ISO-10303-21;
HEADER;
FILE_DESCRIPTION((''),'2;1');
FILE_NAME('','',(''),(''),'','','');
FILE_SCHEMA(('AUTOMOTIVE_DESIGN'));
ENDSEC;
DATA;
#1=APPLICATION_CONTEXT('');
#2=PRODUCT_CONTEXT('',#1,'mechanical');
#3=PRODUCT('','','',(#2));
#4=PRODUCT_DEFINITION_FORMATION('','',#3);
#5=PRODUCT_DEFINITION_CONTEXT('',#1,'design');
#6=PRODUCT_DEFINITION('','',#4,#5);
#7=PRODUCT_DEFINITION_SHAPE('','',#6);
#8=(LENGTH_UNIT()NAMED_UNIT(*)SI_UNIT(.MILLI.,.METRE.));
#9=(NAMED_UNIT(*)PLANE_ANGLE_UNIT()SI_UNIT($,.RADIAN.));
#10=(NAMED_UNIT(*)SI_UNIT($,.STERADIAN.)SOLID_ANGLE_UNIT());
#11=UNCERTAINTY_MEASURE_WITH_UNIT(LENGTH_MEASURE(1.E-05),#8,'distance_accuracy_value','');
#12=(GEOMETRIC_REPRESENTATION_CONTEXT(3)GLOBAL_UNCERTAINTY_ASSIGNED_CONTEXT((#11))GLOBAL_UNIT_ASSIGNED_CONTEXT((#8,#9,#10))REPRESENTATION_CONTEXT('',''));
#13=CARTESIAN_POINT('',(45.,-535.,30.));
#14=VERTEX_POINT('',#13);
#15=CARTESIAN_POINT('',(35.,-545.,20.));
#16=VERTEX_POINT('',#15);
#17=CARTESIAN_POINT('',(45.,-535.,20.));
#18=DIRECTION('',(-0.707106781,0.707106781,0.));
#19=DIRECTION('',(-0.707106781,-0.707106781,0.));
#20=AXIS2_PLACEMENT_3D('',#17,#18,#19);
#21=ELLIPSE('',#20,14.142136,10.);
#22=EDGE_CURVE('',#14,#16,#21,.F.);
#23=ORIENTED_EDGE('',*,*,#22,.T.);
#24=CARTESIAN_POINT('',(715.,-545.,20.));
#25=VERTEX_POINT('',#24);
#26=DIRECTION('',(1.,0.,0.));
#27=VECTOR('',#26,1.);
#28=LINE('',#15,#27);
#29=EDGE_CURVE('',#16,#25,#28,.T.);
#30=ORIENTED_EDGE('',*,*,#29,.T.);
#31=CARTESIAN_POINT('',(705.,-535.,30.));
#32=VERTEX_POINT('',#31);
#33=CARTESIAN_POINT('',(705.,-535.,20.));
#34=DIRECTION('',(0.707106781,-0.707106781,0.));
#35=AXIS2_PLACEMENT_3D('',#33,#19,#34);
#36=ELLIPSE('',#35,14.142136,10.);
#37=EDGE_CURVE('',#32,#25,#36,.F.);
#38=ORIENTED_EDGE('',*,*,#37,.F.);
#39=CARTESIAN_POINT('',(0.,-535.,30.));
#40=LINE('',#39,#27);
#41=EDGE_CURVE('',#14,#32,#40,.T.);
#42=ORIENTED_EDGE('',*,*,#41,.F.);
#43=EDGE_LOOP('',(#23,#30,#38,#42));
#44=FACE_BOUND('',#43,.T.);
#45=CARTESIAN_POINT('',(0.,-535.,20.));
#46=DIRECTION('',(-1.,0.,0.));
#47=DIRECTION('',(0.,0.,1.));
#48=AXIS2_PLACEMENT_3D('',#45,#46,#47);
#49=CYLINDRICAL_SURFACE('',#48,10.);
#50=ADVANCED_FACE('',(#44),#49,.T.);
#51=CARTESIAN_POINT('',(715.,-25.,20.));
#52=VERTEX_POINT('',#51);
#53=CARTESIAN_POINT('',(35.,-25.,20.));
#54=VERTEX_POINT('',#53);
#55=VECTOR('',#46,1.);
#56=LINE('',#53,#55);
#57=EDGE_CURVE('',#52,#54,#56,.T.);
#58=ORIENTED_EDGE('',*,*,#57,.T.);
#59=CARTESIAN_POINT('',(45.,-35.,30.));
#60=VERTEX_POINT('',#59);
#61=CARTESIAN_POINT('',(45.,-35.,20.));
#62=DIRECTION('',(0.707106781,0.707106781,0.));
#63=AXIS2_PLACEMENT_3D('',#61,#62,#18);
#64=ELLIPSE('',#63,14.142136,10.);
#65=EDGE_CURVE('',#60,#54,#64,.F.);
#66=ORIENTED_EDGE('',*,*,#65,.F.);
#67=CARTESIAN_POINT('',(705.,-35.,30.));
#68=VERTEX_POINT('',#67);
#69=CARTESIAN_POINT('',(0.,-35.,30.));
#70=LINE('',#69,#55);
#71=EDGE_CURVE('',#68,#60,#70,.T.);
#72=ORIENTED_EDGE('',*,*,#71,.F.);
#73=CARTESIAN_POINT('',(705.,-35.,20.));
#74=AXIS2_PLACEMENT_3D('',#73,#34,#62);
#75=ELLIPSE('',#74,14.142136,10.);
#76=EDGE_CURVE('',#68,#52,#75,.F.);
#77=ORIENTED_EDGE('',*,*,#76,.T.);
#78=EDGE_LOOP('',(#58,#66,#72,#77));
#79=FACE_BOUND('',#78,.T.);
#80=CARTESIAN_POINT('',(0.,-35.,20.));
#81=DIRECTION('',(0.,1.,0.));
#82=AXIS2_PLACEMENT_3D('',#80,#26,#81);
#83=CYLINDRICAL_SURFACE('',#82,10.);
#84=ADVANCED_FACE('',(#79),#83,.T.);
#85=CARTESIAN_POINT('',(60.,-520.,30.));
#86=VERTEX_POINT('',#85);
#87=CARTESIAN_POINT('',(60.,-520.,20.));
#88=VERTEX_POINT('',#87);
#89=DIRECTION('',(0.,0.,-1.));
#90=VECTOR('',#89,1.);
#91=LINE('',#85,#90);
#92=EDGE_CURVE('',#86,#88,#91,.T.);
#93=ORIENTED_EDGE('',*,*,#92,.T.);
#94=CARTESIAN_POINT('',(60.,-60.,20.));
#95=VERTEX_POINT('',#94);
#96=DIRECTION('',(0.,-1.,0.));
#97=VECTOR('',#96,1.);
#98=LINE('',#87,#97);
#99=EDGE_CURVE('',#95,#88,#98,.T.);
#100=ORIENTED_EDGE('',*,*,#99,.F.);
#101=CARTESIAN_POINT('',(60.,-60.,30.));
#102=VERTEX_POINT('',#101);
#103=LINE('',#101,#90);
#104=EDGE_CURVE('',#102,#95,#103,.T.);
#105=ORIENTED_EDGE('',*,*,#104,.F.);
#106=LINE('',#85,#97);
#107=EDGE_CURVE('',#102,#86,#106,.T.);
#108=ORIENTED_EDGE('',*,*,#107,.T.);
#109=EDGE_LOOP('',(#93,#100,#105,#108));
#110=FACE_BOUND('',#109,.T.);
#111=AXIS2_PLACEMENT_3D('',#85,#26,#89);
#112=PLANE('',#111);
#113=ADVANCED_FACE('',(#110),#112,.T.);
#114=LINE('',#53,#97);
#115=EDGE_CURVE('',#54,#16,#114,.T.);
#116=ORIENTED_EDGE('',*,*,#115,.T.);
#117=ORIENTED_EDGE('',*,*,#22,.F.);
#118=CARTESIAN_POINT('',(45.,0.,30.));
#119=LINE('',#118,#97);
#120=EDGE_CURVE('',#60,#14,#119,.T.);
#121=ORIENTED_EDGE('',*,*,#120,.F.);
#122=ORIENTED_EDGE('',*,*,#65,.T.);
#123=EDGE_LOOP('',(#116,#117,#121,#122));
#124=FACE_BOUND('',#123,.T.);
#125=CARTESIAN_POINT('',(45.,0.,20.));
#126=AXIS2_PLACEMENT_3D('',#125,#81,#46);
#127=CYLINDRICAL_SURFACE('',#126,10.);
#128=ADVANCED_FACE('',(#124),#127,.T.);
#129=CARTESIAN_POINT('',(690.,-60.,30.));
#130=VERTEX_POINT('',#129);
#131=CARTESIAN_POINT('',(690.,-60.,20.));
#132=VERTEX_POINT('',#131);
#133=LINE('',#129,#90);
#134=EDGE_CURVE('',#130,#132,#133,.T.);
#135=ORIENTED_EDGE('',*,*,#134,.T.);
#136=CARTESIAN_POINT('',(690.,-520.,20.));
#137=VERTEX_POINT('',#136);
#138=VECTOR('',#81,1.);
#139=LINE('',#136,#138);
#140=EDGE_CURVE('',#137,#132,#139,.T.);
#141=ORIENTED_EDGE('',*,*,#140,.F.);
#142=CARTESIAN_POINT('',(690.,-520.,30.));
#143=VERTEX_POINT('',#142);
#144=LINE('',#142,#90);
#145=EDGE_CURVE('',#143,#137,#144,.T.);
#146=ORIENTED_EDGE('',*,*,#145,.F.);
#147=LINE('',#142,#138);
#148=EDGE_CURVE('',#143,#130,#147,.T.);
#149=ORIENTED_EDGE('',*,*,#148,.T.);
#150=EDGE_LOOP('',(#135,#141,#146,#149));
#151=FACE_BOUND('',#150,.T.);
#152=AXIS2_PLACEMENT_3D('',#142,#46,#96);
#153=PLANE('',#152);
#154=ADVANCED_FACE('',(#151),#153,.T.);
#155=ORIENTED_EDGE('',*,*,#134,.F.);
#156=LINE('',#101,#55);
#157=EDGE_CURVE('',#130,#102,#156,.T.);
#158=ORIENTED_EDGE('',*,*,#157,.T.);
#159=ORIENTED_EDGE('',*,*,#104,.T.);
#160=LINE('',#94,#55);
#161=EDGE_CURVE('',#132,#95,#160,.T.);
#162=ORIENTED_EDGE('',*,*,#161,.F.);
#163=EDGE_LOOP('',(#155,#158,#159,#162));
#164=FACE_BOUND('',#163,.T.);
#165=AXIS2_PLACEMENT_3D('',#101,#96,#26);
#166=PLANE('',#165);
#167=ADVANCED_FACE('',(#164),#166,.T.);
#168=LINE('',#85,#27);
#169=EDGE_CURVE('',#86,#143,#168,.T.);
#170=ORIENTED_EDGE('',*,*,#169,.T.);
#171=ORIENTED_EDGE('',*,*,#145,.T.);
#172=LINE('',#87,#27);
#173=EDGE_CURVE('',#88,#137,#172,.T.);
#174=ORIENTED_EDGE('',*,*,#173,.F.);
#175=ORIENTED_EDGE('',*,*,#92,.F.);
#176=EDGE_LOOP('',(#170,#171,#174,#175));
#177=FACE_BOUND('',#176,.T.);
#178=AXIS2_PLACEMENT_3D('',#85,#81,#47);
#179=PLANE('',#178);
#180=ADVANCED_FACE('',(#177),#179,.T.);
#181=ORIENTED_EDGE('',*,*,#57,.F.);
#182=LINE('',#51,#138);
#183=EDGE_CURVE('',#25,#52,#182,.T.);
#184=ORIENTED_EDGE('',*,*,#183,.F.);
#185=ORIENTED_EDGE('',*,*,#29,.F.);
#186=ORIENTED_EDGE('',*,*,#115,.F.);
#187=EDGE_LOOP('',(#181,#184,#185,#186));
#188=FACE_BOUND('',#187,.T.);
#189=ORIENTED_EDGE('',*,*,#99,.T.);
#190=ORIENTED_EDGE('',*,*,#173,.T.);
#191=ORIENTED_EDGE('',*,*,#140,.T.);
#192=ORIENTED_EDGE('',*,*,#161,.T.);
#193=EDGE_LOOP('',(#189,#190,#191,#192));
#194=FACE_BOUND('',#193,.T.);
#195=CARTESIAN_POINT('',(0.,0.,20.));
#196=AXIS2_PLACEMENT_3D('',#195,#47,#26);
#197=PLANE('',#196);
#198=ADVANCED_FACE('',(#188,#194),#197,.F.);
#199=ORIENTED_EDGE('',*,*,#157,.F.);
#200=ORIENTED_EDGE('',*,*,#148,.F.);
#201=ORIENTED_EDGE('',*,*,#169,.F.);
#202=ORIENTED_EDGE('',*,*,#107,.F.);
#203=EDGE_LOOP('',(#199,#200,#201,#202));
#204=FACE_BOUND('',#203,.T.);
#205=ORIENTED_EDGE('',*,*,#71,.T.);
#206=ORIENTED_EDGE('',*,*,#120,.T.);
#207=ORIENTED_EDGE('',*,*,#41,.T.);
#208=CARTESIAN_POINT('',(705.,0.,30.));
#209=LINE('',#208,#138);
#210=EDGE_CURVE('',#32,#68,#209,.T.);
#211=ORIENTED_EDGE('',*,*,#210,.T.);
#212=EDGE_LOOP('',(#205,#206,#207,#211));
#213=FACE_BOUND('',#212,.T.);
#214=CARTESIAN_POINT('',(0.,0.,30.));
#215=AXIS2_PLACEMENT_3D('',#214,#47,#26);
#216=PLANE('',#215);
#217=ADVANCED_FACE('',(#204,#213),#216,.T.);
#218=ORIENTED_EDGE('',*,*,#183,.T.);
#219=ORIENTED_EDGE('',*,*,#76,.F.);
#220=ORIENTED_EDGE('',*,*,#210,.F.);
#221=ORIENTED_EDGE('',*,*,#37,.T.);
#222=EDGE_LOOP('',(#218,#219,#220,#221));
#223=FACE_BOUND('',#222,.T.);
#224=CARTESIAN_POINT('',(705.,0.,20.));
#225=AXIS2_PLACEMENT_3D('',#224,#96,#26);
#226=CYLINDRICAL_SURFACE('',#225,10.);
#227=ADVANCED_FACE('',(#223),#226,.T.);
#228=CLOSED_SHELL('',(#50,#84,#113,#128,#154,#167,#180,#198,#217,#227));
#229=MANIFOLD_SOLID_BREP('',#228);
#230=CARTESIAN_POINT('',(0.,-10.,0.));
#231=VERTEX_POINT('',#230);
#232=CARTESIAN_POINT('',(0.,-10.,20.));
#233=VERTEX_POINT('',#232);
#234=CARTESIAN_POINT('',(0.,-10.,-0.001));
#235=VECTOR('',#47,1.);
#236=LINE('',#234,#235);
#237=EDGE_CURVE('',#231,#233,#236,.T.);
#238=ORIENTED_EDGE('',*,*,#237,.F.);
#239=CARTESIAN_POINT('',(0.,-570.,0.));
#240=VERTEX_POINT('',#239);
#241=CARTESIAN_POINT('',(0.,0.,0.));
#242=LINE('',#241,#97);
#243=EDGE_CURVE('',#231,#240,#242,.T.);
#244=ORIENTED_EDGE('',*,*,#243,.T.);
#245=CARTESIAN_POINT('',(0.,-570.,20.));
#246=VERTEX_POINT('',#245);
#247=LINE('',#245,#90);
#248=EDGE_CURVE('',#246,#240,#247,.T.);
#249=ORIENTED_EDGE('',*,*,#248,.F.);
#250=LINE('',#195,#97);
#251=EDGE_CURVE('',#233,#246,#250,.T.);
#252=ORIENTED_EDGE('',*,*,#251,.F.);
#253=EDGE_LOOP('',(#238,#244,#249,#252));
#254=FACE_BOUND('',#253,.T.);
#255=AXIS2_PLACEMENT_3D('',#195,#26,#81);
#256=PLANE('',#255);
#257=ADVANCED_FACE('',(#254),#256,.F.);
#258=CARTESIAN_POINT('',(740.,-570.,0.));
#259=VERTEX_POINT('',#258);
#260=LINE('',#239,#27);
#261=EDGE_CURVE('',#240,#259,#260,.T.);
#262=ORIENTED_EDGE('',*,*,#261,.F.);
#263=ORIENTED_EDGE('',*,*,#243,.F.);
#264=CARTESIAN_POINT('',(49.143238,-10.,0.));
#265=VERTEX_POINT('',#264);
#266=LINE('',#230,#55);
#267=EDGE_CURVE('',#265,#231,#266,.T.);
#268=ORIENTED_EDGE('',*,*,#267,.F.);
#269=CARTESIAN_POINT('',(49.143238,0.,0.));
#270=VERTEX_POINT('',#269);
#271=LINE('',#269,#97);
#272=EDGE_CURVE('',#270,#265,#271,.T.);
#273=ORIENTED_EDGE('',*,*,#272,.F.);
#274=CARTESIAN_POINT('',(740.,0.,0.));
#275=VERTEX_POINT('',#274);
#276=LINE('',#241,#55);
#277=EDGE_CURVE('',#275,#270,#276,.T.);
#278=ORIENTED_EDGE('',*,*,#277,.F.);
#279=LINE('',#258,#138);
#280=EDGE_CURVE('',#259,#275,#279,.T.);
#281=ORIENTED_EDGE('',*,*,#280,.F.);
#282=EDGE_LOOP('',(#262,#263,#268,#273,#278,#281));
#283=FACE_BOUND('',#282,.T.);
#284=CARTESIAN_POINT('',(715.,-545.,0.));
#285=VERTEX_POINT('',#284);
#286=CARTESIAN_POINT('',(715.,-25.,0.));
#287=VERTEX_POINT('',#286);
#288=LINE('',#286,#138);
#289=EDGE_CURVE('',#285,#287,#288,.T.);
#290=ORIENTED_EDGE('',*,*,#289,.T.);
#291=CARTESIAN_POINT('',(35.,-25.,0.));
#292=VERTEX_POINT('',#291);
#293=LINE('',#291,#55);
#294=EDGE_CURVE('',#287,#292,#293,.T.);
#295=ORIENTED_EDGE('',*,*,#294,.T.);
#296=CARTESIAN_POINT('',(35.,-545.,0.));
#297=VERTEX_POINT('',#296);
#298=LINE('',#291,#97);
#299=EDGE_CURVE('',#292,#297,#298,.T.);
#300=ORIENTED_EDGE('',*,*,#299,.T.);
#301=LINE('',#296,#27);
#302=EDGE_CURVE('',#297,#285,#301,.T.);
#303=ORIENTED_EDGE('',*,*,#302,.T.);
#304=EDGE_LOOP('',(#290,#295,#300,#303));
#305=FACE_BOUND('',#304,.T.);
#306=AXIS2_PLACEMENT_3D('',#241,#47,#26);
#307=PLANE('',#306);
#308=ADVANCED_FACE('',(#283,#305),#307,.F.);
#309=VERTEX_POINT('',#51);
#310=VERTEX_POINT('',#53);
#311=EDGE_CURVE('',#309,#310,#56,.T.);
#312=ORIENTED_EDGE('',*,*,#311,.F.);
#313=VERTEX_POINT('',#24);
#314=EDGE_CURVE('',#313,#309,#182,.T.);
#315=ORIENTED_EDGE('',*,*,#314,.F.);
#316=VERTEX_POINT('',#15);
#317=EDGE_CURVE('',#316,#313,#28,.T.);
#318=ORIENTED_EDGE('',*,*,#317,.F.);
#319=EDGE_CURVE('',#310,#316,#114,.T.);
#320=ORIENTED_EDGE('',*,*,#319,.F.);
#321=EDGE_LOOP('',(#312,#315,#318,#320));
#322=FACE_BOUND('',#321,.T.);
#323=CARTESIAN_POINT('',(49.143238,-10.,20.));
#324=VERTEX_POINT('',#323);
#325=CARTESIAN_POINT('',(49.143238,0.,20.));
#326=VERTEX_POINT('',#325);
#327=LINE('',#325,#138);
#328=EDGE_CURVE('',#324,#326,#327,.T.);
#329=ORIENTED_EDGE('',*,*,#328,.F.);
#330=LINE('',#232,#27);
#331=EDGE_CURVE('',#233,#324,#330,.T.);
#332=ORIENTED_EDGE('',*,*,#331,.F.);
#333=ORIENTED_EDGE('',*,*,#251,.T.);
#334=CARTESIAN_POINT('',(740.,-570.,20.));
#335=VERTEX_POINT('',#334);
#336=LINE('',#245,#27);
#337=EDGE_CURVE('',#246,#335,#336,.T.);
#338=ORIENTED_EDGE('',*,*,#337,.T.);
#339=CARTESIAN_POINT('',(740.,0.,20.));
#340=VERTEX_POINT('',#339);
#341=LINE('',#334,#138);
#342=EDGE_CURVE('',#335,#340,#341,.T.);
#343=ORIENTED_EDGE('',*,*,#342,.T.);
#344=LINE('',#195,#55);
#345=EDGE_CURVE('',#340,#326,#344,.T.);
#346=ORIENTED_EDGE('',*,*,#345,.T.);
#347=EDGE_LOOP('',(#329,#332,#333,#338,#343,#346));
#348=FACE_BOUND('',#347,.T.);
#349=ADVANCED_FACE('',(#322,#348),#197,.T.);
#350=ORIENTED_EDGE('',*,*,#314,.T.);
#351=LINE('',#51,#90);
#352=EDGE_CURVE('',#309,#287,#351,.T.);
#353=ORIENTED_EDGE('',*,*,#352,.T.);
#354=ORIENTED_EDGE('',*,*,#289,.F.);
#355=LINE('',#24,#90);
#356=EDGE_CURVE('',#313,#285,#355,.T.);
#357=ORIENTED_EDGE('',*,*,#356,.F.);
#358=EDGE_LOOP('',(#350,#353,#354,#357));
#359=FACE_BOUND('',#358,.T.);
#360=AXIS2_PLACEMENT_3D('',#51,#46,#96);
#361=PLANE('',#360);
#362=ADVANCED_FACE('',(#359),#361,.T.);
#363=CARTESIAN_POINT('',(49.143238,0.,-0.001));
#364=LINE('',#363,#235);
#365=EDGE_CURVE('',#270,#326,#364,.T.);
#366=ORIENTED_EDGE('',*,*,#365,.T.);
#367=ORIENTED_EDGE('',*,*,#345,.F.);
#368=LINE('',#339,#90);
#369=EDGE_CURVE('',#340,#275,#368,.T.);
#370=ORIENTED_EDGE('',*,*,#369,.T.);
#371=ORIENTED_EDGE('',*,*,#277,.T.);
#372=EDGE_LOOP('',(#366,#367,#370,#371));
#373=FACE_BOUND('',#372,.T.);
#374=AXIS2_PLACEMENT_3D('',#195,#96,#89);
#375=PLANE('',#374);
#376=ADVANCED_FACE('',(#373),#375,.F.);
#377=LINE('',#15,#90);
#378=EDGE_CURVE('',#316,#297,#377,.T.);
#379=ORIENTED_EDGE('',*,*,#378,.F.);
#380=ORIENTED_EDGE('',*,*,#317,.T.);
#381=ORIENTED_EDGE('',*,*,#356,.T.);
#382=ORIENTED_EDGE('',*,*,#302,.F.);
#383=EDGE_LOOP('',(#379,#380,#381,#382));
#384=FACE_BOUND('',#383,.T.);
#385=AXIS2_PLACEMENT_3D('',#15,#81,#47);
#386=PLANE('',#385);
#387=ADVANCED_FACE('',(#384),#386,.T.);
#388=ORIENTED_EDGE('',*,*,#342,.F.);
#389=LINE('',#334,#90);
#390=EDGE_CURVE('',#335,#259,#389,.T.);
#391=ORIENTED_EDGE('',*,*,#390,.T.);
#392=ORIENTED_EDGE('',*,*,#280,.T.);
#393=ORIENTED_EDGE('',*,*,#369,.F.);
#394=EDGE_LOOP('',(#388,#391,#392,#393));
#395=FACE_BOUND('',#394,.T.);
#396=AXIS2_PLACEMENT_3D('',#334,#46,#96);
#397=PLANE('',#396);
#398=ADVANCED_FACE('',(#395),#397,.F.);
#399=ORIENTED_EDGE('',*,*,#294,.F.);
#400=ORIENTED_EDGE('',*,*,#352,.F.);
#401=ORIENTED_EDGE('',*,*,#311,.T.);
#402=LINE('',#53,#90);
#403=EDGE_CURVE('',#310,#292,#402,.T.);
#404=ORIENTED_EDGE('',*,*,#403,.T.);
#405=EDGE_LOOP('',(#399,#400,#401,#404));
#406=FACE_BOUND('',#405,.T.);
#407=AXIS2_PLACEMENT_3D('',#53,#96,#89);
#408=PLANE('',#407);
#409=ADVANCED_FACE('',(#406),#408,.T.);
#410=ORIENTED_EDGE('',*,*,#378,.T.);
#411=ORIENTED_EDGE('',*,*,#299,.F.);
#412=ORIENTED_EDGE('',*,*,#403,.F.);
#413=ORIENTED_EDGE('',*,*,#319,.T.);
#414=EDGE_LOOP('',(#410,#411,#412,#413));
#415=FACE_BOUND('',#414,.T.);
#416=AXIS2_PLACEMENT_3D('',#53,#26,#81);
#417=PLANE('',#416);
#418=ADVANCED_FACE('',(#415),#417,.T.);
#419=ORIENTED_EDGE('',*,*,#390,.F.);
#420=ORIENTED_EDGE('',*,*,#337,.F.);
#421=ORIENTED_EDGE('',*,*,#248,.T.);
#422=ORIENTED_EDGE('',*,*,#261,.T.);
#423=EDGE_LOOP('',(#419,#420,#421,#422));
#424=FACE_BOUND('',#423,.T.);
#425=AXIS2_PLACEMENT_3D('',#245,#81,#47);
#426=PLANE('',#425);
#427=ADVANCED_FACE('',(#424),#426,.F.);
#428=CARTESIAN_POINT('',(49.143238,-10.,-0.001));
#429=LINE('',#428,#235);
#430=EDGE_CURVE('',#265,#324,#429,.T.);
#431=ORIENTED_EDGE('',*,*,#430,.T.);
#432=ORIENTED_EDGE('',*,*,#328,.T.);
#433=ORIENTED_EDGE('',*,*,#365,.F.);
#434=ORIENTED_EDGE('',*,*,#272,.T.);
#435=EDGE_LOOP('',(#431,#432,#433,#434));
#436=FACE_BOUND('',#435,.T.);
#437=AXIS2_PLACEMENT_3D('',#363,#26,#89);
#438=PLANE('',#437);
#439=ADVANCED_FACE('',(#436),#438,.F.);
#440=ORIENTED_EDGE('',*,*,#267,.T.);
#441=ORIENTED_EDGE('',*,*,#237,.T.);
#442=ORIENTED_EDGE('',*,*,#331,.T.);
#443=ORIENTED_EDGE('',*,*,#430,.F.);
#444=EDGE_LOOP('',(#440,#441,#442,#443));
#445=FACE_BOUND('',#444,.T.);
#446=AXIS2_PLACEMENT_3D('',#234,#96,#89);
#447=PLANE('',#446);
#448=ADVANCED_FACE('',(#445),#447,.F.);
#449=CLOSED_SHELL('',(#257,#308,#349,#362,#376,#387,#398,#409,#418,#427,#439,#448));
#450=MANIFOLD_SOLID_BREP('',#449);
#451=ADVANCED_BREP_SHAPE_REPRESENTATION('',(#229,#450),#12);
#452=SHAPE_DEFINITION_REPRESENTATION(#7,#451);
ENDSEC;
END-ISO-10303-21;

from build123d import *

# Parameters (mm, degrees)
ESBO_O2_W                = 740
ESBO_O2_H                = 570
ESBO_O2_W_2              = 680
ESBO_O2_H_2              = 520
RESSALTO_EXTRUS_O1_DEPTH = 20
ESBO_O3_W                = 680
ESBO_O3_H                = 520
ESBO_O3_W_2              = 630
ESBO_O3_H_2              = 460
RESSALTO_EXTRUS_O2_DEPTH = 10
FILETE1_R                = 10
ESBO_O4_W                = 49.143238
ESBO_O4_H                = 10
CORTE_EXTRUS_O1_DEPTH    = 20


with BuildPart() as part:
    # Esboço2 → Ressalto-extrusão1 (new body)
    with BuildSketch(Plane.XY):
        with Locations((370, -285)):
            Rectangle(ESBO_O2_W, ESBO_O2_H)
        with Locations((375, -285)):
            Rectangle(ESBO_O2_W_2, ESBO_O2_H_2, mode=Mode.SUBTRACT)
    extrude(amount=RESSALTO_EXTRUS_O1_DEPTH)

    # Esboço4 → Corte-extrusão1 (cut)
    with BuildSketch(Plane.XY.offset(20)):
        with Locations((24.571619, -5)):
            Rectangle(ESBO_O4_W, ESBO_O4_H)
    extrude(amount=-CORTE_EXTRUS_O1_DEPTH, mode=Mode.SUBTRACT)


with BuildPart() as body_2:
    # Esboço3 → Ressalto-extrusão2 (new body)
    with BuildSketch(Plane.XY.offset(20)):
        with Locations((375, -285)):
            Rectangle(ESBO_O3_W, ESBO_O3_H)
        with Locations((375, -290)):
            Rectangle(ESBO_O3_W_2, ESBO_O3_H_2, mode=Mode.SUBTRACT)
    extrude(amount=RESSALTO_EXTRUS_O2_DEPTH)

    # Filete1
    filete1_edges = [body_2.edges().sort_by_distance(p)[0] for p in [
        (715, -285, 30),
        (375, -25, 30),
        (35, -285, 30),
        (375, -545, 30),
    ]]
    fillet(filete1_edges, radius=FILETE1_R - 0.0001)  # a hair under: the kernel refuses the full size


solid = Compound([part.part, body_2.part])
